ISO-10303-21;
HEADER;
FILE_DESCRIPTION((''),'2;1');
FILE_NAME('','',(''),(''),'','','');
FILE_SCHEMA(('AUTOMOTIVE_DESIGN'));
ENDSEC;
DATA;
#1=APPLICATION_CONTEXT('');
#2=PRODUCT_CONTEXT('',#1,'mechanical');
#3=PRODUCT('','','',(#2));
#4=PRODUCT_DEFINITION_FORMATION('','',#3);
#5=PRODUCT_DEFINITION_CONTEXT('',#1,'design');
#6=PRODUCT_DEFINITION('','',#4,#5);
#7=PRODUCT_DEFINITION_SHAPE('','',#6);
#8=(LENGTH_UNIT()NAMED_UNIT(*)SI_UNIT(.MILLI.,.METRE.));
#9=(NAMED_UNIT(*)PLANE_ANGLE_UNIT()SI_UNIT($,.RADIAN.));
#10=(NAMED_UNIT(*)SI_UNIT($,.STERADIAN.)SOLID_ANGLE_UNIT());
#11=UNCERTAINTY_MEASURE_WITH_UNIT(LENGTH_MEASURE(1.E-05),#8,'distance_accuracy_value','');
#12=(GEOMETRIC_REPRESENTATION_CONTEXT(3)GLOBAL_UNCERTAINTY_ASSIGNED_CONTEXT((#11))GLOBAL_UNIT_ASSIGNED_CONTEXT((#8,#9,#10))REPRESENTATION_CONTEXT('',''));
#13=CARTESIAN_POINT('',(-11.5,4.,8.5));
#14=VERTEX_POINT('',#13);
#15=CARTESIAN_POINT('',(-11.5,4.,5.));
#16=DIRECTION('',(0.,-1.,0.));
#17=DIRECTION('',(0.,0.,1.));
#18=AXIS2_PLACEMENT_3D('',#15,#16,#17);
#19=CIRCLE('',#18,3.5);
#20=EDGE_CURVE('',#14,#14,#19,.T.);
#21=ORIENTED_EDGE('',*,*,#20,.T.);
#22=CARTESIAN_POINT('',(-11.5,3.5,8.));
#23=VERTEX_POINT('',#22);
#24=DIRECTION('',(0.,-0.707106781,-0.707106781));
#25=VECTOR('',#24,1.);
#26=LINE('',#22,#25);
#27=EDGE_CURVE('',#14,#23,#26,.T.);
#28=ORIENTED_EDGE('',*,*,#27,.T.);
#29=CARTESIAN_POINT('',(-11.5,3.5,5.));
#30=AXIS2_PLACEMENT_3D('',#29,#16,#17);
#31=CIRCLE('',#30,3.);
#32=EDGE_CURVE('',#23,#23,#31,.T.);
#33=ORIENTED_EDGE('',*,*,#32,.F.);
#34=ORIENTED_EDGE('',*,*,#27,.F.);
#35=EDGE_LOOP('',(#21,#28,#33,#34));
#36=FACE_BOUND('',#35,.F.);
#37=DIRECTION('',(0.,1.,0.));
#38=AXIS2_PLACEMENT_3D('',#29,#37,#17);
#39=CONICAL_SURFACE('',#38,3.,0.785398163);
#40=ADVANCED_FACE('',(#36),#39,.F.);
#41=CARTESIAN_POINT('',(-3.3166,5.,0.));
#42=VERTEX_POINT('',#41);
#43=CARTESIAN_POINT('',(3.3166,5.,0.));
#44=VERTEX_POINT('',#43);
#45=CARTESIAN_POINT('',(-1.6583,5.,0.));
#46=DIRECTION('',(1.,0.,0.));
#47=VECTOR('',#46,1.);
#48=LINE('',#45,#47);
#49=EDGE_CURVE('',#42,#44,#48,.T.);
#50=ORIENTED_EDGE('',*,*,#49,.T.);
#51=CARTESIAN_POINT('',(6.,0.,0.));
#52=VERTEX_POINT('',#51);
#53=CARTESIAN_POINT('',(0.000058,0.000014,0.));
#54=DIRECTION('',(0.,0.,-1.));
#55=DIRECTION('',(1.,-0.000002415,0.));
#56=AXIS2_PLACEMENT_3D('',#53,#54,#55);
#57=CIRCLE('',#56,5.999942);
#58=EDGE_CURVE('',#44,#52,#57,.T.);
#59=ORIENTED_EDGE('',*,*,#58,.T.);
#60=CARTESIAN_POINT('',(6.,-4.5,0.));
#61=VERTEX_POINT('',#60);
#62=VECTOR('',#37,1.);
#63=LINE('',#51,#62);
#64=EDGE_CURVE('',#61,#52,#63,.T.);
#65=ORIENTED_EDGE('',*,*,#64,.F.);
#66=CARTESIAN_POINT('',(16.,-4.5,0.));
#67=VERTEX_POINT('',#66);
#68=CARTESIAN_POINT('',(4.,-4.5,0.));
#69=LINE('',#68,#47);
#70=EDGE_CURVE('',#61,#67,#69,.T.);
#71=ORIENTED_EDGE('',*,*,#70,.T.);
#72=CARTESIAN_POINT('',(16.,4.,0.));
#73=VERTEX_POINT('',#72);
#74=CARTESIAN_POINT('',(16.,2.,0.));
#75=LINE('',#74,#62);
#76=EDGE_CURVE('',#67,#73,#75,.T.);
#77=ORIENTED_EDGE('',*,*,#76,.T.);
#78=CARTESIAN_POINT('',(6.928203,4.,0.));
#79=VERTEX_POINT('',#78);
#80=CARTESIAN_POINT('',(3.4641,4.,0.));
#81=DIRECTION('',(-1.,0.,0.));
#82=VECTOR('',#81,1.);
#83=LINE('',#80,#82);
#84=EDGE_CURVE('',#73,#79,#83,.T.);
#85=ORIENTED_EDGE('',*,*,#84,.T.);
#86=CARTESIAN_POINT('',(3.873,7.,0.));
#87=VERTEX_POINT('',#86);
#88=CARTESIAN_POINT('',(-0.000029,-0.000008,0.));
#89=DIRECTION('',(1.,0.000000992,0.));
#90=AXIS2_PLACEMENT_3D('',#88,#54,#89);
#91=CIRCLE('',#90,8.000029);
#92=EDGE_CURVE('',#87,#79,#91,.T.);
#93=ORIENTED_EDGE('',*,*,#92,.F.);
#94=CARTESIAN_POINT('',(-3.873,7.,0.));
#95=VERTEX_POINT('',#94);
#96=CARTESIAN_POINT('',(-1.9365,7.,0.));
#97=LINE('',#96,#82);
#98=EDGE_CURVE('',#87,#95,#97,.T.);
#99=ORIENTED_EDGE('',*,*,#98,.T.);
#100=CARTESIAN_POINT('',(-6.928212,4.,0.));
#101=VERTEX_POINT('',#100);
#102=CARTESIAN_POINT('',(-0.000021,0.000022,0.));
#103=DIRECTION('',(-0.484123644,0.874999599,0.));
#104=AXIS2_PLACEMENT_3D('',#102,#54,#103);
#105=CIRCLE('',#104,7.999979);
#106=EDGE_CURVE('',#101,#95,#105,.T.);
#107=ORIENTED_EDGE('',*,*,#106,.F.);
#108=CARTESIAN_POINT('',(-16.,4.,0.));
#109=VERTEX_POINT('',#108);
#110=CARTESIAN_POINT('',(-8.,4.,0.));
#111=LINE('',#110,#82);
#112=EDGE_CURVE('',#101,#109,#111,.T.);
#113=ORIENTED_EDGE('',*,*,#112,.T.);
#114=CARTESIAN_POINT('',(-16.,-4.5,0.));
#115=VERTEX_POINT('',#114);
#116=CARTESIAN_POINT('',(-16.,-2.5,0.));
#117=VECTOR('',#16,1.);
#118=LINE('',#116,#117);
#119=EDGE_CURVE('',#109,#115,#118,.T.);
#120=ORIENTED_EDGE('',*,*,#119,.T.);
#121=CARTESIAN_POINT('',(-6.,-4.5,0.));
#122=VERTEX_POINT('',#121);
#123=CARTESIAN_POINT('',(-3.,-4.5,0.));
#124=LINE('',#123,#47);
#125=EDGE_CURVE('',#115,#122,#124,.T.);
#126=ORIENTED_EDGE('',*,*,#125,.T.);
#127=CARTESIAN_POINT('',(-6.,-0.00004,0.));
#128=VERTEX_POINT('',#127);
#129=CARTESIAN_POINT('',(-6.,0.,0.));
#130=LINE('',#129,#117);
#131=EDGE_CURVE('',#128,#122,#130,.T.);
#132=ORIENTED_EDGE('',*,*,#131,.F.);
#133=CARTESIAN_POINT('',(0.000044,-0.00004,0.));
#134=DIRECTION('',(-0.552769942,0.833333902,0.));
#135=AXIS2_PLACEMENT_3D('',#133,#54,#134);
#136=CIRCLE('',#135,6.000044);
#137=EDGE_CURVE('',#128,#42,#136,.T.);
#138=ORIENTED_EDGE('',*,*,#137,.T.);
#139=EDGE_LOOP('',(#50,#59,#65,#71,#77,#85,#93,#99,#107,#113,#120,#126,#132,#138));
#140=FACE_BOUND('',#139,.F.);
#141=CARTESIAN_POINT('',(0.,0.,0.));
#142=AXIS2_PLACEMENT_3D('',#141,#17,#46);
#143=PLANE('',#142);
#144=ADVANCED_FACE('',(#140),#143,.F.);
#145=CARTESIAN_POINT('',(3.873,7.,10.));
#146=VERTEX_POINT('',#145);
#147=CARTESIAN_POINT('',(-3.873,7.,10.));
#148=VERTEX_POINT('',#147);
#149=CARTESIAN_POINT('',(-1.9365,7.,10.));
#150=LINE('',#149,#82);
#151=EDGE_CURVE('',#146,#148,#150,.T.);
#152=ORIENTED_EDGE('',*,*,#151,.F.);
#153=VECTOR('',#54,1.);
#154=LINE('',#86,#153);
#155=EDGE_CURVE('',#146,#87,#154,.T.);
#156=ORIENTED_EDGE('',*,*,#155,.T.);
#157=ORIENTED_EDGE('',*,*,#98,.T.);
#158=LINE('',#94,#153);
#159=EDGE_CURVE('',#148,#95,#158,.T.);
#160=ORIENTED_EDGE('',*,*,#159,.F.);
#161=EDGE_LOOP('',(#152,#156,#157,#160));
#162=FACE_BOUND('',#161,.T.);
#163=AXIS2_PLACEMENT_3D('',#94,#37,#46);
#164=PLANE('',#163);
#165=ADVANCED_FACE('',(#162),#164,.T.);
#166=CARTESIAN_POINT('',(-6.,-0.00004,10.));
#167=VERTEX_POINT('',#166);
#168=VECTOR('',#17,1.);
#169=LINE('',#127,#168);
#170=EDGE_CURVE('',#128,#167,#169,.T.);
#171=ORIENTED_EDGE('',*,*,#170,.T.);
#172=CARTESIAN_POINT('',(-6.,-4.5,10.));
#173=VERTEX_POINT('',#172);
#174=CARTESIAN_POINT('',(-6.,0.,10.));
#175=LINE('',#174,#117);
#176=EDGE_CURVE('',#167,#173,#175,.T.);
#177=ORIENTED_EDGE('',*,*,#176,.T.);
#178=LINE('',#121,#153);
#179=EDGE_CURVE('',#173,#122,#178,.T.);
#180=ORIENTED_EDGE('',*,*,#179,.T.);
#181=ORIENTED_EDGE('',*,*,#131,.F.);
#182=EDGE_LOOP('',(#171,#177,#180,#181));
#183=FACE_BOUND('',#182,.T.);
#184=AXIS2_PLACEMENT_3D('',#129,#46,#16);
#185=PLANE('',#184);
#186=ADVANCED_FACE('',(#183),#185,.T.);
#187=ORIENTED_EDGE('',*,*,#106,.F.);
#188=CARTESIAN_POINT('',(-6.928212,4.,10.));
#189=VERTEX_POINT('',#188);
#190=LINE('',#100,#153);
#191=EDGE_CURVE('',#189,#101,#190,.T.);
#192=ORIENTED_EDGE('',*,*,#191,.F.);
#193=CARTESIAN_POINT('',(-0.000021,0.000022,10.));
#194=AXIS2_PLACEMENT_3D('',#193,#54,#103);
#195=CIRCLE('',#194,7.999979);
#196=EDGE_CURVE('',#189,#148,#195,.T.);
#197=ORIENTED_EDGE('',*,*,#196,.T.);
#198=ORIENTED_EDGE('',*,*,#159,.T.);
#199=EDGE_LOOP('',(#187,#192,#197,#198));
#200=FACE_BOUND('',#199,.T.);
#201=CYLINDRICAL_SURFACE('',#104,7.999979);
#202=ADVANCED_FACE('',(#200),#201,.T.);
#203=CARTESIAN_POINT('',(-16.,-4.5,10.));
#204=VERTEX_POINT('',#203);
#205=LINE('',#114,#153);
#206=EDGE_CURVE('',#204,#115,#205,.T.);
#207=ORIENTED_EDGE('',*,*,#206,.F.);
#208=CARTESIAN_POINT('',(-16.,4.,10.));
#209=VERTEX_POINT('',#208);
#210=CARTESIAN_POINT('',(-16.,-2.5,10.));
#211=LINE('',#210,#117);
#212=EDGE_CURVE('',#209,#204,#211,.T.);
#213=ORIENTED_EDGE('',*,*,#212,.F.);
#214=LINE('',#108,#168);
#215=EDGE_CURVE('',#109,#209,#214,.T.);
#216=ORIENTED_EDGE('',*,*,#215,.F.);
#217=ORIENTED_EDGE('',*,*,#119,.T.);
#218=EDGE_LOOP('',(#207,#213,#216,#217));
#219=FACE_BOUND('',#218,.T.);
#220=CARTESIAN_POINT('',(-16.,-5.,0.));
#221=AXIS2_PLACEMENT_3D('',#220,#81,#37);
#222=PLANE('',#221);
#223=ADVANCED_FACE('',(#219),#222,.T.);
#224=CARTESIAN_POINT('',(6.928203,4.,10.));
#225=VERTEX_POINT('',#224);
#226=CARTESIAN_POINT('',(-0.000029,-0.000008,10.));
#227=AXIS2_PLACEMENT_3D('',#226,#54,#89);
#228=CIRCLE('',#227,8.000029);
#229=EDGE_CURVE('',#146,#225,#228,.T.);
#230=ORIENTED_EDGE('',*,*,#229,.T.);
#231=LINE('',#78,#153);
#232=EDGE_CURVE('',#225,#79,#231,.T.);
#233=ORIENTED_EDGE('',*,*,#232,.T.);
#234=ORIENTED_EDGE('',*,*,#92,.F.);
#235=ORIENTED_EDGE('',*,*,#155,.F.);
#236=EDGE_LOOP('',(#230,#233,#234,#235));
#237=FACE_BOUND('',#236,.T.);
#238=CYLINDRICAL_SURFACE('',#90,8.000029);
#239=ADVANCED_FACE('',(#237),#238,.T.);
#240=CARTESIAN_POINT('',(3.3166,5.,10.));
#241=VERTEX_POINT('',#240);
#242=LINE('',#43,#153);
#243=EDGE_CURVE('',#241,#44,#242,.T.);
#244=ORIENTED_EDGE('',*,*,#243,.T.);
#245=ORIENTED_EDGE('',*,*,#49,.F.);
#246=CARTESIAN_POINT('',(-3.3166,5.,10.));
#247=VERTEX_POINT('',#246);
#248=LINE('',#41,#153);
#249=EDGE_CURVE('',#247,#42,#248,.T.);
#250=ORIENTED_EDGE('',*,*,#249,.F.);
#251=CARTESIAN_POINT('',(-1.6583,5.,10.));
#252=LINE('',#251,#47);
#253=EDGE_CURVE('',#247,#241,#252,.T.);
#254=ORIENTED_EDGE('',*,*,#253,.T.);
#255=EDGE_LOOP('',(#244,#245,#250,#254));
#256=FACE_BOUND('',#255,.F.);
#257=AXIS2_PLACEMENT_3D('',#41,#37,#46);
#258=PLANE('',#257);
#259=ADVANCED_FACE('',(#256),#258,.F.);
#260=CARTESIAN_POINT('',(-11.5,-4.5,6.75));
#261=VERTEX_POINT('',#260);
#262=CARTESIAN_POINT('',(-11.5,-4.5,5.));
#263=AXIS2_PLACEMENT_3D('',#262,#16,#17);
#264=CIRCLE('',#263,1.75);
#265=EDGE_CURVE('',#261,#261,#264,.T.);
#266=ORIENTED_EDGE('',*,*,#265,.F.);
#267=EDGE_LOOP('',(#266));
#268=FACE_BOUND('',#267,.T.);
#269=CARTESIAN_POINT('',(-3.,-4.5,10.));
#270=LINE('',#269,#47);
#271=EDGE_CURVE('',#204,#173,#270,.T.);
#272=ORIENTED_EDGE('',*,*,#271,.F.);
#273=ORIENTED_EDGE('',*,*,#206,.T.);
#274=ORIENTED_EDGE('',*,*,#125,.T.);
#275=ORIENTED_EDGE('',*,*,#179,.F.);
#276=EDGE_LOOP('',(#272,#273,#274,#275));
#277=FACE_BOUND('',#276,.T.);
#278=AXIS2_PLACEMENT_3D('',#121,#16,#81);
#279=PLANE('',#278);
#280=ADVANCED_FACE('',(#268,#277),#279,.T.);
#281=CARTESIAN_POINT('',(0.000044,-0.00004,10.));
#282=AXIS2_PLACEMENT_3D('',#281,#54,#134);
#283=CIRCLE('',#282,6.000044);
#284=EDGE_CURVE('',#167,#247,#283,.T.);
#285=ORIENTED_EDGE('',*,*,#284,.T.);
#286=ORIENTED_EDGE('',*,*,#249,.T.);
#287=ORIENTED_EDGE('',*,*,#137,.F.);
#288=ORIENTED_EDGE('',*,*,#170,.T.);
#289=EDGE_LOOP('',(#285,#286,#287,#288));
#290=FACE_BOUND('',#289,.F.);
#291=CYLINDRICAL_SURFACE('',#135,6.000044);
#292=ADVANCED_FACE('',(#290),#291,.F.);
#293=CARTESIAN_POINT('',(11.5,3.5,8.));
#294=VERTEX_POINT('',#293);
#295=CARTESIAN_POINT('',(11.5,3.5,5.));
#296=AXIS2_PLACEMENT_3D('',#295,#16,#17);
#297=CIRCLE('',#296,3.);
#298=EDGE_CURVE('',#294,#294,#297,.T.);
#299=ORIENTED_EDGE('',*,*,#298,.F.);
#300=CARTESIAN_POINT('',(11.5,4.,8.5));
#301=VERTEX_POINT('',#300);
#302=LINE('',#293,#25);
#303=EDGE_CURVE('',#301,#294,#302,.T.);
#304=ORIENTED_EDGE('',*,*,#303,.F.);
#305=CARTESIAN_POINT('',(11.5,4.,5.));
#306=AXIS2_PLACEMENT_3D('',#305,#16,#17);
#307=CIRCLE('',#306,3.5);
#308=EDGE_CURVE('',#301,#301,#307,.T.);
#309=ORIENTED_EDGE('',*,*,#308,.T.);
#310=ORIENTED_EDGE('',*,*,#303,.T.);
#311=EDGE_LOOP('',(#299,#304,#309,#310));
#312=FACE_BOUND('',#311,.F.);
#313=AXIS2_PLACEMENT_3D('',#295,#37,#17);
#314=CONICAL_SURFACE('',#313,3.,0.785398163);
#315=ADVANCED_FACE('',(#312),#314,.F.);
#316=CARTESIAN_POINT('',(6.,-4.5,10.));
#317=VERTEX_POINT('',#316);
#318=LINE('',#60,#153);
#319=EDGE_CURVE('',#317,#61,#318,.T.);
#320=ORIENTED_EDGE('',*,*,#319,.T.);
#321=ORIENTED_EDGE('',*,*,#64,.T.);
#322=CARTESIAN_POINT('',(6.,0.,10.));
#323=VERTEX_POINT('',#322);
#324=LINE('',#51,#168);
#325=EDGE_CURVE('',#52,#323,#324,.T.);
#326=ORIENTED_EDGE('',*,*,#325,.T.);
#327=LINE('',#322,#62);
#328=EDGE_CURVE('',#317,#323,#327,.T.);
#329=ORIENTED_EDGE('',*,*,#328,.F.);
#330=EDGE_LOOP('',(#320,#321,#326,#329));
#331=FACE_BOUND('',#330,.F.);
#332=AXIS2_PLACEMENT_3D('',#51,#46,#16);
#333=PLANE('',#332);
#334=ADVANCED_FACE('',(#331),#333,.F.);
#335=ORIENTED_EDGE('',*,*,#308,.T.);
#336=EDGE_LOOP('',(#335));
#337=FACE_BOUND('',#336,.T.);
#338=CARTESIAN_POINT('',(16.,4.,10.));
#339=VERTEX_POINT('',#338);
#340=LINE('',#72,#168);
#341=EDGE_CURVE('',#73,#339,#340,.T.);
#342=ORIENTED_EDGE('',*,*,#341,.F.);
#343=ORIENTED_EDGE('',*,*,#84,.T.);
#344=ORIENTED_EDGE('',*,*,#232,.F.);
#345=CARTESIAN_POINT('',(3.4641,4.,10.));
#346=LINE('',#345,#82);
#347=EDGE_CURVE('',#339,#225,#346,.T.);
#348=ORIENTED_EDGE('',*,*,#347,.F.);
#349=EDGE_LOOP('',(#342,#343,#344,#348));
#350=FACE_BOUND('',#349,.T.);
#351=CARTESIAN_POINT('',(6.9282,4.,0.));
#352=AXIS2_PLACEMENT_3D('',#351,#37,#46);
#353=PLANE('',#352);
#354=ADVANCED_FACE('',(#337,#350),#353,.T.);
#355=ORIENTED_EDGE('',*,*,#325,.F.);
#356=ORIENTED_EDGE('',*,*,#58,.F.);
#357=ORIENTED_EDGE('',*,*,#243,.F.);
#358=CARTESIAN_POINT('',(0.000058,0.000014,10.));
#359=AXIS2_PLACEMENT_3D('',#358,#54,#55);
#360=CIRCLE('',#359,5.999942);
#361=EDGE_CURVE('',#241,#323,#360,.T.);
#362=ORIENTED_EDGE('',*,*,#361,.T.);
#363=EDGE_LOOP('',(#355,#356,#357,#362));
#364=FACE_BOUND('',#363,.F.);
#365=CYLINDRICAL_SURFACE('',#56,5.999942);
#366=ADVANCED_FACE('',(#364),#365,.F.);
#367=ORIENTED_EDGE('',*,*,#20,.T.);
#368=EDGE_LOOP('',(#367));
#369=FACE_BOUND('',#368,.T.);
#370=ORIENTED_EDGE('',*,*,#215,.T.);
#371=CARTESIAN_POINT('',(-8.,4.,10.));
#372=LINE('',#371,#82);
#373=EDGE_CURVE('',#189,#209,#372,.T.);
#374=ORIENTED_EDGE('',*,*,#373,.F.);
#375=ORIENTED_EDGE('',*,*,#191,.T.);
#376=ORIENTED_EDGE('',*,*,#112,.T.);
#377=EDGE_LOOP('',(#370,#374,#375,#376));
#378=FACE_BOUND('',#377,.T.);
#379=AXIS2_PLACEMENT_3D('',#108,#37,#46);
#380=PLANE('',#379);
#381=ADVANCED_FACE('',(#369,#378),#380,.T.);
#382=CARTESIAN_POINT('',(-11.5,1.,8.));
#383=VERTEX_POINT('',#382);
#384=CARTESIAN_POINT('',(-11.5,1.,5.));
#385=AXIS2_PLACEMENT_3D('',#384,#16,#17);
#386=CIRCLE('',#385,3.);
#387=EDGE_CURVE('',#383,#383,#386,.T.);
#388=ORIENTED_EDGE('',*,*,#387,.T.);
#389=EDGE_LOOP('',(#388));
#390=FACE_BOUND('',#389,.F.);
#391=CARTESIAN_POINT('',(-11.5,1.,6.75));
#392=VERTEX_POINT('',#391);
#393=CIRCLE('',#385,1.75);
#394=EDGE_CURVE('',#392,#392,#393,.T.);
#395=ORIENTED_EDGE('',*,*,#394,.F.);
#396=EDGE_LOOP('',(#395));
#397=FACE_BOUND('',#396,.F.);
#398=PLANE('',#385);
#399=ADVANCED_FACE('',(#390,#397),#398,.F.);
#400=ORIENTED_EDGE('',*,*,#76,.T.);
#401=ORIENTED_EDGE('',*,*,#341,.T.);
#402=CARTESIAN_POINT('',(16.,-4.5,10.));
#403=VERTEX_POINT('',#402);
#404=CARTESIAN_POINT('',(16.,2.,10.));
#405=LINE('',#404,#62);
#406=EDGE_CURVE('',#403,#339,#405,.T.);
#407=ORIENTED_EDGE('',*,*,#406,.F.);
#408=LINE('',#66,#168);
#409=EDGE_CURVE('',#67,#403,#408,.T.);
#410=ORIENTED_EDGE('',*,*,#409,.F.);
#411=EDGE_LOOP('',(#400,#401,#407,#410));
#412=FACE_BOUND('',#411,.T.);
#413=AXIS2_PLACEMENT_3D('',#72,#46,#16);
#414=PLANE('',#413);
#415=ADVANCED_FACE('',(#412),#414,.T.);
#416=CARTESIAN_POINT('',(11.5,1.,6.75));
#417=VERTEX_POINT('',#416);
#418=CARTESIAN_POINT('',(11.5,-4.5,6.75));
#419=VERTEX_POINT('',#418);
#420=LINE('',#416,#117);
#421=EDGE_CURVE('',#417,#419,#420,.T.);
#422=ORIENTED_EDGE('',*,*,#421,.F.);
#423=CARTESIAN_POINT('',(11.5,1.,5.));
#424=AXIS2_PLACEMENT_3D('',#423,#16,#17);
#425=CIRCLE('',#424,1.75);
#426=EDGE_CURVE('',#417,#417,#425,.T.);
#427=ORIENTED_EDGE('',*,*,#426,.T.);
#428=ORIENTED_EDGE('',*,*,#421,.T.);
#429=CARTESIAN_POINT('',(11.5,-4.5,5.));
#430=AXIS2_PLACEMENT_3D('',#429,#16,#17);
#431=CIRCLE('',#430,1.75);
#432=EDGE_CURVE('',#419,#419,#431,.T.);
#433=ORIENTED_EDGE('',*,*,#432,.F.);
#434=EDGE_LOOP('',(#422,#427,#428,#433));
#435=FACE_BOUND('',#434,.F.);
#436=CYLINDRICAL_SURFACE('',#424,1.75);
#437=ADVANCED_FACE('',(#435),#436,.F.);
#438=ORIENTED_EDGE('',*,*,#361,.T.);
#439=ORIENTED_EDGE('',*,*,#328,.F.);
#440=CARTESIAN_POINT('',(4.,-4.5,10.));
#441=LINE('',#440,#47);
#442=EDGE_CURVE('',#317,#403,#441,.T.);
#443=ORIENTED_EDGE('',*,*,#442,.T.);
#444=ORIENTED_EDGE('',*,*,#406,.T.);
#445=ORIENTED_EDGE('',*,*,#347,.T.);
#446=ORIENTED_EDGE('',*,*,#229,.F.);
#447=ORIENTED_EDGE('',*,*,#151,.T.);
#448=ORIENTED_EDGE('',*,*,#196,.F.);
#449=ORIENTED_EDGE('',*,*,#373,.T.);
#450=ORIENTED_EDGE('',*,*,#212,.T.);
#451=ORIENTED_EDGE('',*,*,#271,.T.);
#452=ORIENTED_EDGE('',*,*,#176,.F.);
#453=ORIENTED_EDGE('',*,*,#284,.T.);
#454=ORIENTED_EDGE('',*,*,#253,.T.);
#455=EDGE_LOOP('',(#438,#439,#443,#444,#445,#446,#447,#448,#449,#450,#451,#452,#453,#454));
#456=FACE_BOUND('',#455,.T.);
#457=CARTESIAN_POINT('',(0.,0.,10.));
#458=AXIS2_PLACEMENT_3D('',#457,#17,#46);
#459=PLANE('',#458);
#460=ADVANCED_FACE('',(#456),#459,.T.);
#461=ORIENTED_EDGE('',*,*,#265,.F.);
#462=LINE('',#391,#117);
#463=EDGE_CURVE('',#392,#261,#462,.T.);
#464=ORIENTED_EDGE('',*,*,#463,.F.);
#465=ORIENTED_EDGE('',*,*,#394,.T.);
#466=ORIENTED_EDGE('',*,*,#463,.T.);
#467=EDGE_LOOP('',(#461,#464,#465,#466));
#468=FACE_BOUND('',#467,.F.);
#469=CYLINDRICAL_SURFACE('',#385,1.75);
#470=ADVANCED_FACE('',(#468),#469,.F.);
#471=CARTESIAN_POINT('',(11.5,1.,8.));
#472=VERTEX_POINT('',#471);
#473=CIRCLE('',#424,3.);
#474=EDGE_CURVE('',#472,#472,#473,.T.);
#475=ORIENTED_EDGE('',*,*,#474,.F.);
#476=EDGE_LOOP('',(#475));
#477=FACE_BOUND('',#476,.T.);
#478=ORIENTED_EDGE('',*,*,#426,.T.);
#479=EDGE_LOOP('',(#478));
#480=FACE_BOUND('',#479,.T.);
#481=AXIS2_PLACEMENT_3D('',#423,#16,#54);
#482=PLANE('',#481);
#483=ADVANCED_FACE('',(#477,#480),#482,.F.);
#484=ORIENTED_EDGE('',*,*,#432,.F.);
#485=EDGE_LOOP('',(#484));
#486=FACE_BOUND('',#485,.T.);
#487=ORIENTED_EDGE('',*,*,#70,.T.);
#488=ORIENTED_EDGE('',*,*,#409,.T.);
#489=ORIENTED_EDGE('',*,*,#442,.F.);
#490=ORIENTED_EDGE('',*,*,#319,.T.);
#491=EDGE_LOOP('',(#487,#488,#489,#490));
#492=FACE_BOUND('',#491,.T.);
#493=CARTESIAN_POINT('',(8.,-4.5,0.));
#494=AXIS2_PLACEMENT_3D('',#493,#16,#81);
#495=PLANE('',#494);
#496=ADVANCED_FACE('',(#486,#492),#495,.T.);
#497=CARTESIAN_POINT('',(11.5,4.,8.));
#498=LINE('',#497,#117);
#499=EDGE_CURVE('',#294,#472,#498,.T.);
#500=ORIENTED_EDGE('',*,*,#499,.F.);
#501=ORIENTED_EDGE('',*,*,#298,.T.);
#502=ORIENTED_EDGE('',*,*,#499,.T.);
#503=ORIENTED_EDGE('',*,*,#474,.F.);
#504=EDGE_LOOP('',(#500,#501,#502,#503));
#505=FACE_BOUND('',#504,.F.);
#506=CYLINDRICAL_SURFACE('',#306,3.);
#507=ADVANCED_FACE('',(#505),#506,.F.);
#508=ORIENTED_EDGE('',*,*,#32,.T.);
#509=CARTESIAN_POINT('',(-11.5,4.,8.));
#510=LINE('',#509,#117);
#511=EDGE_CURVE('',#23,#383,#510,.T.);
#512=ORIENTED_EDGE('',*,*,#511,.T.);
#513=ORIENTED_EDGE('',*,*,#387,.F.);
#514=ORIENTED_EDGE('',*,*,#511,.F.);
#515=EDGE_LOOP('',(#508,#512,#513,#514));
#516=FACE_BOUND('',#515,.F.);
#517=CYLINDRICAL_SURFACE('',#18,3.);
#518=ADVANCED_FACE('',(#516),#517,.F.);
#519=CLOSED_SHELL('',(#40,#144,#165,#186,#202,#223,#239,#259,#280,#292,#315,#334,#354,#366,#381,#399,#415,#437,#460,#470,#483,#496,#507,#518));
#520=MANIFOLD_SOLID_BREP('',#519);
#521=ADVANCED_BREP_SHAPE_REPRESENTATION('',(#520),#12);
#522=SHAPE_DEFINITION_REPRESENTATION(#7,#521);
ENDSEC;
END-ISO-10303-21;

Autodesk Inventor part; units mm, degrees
ref_plane "YZ Plane" through (0, 0, 0) normal (1, 0, 0) x (0, 1, 0)
ref_plane "XZ Plane" through (0, 0, 0) normal (0, 1, 0) x (-1, 0, 0)
sketch "Náčrt1" plane through (0, 0, 0) normal (0, 0, 1) x (1, 0, 0)
  line L0 (-3.3166, 5) -> (3.3166, 5)
  line L1 (3.3166, -5) -> (-3.3166, -5)
  arc A0 (-3.3166, 5) -> (-6, 0) centre (0, 0) ccw
  arc A1 (6, 0) -> (3.3166, 5) centre (0, 0) ccw
  line L2 (-3.3166, 5) -> (3.3166, -5)
  line L3 (3.3166, 5) -> (-3.3166, -5)
  line L4 (-16, 7) -> (16, 7)
  line L5 (16, 7) -> (16, -5)
  line L6 (16, -5) -> (-16, -5)
  line L7 (-16, -5) -> (-16, 7)
  line L8 (0, 5) -> (0, -5)
  line L9 (-16, 4) -> (-6.9282, 4)
  arc A2 (8, 0) -> (3.873, 7) centre (0, 0) ccw
  line L10 (3.873, 7) -> (-3.873, 7)
  line L11 (-8, 0) -> (-8, -5)
  line L12 (-6, 0) -> (-6, -5)
  line L13 (6, 0) -> (6, -5)
  line L14 (8, 0) -> (8, -5)
  arc A3 (-3.873, 7) -> (-8, 0) centre (0, 0) ccw
  line L15 (6.9282, 4) -> (16, 4)
  point P0 (3.873, 7)
  dimension "d13" = 10
  dimension "d14" = 12
  dimension "d15" = 6
  dimension "d16" = 32
  dimension "d17" = 12
  dimension "d20" = 9
extrude "Vysunutí1" add sketch "Náčrt1" along normal blind 10 contours A0 L12 L6 L11 A3 L4 A2 L14 L13 A1 L0 | L6 L7 L9 A3 L11 | L14 A2 L15 L5 L6
sketch "Náčrt2" plane through (-16, 4, 0) normal (0, 1, 0) x (1, 0, 0)
  line L0 (0, 0) -> (0, -10) projected
  line L1 (9.0718, -10) -> (0, -10) projected
  point P0 (16, 0)
  point P1 (4.5, -5)
  dimension "d24" = 4.5
  dimension "d25" = 5
hole "Díra1" at (-11.5, 4, 5) direction (0, -1, 0) diameter 3.5 end through all counterbore diameter 6 counterbore depth 3
ref_plane "Pracovní rovina1" through (0, -5, 0) normal (1, 0, 0) x (0, 0, -1)
mirror "Zrcadlit1" about plane through (0, -5, 0) normal (1, 0, 0) of "Díra1"
move faces "Posunout1" translate (0, 0.5, 0) faces at (-7.2543, -5, 5.0703) (7.2543, -5, 5.0703)
chamfer "Zkosení1" distance 0.5 angle 45 2 edges at (-11.5, 4, 2) (11.5, 4, 2)
properties part number "Držak motoru"
